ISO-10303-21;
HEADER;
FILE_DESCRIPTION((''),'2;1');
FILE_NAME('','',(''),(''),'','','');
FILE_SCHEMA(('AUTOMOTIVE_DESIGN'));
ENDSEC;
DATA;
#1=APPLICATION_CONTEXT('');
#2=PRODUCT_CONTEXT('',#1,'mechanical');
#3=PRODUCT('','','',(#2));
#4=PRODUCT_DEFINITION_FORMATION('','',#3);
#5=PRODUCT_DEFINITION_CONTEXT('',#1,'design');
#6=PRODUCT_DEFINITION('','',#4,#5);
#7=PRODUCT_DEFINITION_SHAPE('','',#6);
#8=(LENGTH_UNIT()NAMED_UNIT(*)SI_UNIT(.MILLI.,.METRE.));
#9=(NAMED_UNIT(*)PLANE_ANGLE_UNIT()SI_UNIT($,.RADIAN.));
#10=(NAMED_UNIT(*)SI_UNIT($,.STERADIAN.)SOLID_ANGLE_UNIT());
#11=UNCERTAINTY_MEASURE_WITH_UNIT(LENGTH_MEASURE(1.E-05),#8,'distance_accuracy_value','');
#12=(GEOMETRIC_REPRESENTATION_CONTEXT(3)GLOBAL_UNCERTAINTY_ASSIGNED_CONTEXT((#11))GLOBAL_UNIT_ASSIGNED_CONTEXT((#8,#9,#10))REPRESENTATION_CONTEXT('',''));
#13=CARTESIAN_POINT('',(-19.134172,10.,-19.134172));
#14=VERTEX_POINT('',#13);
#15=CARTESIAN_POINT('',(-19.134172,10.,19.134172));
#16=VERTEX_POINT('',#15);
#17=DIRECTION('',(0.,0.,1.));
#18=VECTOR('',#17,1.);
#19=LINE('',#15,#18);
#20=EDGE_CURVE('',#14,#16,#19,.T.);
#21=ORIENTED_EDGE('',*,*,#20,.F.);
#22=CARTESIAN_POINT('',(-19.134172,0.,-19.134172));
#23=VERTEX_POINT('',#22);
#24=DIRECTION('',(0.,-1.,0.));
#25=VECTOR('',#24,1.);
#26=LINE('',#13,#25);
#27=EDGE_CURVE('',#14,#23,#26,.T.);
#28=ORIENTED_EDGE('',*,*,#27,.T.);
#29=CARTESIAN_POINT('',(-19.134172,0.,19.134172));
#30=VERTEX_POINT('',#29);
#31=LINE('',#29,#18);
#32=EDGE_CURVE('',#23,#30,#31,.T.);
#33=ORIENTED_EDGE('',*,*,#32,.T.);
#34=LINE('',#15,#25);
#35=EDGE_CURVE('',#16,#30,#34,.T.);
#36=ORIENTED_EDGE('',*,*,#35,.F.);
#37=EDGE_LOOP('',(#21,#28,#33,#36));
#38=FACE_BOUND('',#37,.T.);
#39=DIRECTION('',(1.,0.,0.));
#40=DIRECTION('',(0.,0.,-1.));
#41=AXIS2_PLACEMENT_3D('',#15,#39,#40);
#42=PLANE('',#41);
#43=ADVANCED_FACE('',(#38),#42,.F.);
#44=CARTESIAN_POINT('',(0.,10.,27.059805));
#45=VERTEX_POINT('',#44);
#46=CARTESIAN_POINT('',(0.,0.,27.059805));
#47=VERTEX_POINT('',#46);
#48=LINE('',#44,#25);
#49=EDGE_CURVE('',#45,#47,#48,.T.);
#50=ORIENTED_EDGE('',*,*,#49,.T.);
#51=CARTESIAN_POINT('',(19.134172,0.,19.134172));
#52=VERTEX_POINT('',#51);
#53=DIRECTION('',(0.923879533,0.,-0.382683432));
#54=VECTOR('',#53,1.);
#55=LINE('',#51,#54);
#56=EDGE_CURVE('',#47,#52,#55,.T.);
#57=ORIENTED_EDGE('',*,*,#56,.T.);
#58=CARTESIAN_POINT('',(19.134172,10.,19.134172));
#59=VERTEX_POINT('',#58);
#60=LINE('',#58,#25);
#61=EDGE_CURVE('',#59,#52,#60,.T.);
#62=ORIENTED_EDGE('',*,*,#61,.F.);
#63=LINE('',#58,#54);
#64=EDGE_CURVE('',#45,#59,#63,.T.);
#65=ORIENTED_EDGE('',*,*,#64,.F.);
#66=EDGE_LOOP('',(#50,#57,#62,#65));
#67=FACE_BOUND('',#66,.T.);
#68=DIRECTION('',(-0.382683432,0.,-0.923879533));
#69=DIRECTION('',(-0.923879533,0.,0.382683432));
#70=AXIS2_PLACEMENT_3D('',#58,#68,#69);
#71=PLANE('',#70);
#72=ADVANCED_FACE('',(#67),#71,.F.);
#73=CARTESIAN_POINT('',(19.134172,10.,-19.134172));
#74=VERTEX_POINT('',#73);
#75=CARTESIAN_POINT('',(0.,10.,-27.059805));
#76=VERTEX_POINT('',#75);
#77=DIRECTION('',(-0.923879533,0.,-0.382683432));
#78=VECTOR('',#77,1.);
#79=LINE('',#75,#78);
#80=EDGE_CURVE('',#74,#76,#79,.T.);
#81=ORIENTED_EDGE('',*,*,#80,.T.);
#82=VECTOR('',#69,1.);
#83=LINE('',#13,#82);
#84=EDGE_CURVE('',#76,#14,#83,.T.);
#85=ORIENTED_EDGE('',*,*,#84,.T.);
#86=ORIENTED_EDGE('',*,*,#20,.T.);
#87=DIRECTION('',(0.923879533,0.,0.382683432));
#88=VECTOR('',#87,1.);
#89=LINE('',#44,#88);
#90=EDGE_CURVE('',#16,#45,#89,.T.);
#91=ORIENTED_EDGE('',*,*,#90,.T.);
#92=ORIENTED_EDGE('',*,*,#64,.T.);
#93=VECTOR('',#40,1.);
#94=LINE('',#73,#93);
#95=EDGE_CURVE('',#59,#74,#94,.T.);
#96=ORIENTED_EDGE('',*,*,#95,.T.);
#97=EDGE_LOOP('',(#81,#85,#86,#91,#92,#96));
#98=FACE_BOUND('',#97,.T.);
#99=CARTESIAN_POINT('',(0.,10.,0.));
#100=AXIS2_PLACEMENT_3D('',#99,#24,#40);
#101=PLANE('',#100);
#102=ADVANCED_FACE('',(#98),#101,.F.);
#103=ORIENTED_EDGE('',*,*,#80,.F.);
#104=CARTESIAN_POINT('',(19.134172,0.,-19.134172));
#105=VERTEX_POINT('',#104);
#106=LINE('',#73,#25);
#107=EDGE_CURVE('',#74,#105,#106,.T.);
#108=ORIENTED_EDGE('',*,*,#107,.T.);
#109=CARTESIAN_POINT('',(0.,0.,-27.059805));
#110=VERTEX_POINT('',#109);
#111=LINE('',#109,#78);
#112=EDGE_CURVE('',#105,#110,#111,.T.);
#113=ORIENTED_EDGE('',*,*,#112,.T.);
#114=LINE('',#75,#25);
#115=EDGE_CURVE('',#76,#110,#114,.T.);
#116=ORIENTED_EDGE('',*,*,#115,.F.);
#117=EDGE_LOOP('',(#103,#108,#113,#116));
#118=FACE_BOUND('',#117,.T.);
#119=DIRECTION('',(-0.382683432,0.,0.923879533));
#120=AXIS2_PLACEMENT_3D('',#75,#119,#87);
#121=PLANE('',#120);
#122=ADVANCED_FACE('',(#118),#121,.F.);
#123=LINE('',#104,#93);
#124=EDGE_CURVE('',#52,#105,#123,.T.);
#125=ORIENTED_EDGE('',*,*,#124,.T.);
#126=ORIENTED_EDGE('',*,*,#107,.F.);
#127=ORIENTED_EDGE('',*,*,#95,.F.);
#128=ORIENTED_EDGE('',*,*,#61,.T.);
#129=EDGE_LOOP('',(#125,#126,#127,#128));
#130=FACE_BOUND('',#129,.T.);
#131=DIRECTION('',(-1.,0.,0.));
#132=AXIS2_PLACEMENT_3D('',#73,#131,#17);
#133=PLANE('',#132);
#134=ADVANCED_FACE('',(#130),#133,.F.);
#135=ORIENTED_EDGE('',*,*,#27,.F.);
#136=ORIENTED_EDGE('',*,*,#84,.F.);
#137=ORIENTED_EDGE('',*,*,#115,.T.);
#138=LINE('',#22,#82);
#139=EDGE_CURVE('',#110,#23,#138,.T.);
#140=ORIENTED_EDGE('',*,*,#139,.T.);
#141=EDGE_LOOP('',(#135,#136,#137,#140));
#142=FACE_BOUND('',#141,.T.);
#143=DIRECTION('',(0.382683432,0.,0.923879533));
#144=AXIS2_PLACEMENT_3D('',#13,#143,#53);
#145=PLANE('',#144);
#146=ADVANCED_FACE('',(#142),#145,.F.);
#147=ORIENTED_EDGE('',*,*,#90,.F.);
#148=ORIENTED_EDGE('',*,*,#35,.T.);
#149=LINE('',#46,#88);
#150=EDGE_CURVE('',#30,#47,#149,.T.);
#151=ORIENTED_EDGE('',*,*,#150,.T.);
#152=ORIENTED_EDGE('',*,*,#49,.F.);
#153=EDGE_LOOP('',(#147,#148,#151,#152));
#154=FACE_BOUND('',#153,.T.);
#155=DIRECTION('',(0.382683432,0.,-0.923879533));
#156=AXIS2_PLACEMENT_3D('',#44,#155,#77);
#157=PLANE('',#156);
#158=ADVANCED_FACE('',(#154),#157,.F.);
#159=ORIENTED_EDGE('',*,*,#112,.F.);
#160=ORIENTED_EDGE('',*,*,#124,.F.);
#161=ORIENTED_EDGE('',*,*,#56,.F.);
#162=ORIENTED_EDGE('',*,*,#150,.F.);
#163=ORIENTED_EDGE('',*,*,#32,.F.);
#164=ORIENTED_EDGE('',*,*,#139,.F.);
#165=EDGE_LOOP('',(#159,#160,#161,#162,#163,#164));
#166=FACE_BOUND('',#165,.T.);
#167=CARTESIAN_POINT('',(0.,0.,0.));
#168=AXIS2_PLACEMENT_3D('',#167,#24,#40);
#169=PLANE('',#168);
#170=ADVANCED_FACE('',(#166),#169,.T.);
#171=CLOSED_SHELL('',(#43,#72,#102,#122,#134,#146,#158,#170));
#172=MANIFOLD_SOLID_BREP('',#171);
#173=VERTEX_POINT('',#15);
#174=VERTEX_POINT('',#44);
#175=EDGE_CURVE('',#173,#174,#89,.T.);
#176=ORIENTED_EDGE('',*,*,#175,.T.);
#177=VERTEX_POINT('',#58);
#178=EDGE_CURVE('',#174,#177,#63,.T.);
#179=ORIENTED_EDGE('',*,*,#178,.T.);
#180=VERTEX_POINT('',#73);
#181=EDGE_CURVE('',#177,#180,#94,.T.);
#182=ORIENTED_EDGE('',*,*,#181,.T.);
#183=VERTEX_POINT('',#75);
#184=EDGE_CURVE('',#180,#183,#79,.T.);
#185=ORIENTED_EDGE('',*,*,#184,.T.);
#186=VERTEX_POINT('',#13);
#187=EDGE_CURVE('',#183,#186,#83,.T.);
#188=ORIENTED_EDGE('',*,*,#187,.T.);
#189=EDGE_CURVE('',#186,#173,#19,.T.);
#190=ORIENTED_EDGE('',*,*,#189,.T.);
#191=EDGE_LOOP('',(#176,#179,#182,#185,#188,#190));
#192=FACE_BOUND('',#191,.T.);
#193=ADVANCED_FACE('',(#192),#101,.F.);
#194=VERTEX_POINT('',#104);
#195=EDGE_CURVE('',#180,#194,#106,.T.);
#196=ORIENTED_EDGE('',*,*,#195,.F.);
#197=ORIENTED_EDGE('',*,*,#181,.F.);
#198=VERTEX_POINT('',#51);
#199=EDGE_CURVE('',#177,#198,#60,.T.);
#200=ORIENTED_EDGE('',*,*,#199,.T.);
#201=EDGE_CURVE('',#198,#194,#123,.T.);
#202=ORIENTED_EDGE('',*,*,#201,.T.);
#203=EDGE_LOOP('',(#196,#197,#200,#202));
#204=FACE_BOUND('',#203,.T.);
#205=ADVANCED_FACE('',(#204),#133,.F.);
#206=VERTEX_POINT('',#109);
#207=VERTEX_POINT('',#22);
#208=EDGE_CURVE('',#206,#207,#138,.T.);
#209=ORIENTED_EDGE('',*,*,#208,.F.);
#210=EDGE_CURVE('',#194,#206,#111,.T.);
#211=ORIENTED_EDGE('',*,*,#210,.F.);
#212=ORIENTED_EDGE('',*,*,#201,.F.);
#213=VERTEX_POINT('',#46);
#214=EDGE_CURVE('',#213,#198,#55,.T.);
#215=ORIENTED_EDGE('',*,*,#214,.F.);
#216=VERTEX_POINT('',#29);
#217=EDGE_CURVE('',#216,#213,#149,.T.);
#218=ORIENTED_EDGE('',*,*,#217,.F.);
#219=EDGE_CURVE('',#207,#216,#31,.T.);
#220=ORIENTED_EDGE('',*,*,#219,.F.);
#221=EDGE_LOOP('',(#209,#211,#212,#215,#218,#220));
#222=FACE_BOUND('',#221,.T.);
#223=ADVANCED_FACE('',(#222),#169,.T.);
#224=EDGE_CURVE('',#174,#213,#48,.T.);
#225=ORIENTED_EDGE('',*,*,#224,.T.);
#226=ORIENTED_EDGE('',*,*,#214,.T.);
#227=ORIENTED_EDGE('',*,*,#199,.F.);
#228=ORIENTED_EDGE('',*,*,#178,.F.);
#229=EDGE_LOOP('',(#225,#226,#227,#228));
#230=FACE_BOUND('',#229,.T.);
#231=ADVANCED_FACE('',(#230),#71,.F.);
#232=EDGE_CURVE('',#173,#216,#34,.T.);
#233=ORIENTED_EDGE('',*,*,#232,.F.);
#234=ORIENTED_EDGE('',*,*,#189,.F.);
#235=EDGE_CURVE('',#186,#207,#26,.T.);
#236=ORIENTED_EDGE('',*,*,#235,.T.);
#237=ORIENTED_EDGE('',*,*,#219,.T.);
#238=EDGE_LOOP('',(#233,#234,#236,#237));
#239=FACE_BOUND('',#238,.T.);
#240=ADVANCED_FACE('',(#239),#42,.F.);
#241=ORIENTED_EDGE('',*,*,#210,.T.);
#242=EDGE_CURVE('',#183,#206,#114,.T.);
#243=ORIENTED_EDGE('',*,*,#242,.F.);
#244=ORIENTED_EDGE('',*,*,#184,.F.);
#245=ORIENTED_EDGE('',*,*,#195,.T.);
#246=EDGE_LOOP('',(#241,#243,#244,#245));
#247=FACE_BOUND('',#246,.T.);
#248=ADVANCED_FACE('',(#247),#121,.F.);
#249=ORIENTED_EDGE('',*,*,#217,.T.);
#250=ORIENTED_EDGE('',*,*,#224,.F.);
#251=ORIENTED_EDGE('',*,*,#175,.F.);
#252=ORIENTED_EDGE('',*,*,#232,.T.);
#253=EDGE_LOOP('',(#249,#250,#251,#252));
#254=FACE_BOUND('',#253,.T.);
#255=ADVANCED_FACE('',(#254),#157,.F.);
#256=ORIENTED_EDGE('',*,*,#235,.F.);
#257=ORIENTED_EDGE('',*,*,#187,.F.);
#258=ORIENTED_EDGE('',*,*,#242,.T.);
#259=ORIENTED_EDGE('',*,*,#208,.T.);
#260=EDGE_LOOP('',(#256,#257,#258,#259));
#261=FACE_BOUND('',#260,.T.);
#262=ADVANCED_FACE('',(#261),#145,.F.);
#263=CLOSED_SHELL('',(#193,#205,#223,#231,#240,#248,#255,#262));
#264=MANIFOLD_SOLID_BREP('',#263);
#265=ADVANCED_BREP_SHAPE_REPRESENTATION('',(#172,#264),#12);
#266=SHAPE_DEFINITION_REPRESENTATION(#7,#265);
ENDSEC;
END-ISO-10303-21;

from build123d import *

# Parameters (mm, degrees)
BOSS_EXTRUDE1_DEPTH   = 10
BODY_MOVE_COPY1_DEPTH = 10


# Read off the part's stored shape, not the designer's step: Body-Move/Copy1
with BuildPart() as part:
    # Sketch1 → Boss-Extrude1 (new body)
    with BuildSketch(Plane(origin=(0, 0, 0), x_dir=(1, 0, 0), z_dir=(0, 1, 0))):
        Polygon((0, 27.059805007), (19.134171618, 19.134171618), (19.134171618, -19.134171618), (0, -27.059805007), (-19.134171618, -19.134171618), (-19.134171618, 19.134171618), align=None)
    extrude(amount=BOSS_EXTRUDE1_DEPTH)


with BuildPart() as body_2:
    # Body-Move/Copy1 outline → Body-Move/Copy1 (new body)
    with BuildSketch(Plane(origin=(0, 0, 0), x_dir=(1, 0, 0), z_dir=(0, 1, 0))):
        Polygon((0, 27.059805007), (-19.134171618, 19.134171618), (-19.134171618, -19.134171618), (0, -27.059805007), (19.134171618, -19.134171618), (19.134171618, 19.134171618), align=None)
    extrude(amount=BODY_MOVE_COPY1_DEPTH)


solid = Compound([part.part, body_2.part])
